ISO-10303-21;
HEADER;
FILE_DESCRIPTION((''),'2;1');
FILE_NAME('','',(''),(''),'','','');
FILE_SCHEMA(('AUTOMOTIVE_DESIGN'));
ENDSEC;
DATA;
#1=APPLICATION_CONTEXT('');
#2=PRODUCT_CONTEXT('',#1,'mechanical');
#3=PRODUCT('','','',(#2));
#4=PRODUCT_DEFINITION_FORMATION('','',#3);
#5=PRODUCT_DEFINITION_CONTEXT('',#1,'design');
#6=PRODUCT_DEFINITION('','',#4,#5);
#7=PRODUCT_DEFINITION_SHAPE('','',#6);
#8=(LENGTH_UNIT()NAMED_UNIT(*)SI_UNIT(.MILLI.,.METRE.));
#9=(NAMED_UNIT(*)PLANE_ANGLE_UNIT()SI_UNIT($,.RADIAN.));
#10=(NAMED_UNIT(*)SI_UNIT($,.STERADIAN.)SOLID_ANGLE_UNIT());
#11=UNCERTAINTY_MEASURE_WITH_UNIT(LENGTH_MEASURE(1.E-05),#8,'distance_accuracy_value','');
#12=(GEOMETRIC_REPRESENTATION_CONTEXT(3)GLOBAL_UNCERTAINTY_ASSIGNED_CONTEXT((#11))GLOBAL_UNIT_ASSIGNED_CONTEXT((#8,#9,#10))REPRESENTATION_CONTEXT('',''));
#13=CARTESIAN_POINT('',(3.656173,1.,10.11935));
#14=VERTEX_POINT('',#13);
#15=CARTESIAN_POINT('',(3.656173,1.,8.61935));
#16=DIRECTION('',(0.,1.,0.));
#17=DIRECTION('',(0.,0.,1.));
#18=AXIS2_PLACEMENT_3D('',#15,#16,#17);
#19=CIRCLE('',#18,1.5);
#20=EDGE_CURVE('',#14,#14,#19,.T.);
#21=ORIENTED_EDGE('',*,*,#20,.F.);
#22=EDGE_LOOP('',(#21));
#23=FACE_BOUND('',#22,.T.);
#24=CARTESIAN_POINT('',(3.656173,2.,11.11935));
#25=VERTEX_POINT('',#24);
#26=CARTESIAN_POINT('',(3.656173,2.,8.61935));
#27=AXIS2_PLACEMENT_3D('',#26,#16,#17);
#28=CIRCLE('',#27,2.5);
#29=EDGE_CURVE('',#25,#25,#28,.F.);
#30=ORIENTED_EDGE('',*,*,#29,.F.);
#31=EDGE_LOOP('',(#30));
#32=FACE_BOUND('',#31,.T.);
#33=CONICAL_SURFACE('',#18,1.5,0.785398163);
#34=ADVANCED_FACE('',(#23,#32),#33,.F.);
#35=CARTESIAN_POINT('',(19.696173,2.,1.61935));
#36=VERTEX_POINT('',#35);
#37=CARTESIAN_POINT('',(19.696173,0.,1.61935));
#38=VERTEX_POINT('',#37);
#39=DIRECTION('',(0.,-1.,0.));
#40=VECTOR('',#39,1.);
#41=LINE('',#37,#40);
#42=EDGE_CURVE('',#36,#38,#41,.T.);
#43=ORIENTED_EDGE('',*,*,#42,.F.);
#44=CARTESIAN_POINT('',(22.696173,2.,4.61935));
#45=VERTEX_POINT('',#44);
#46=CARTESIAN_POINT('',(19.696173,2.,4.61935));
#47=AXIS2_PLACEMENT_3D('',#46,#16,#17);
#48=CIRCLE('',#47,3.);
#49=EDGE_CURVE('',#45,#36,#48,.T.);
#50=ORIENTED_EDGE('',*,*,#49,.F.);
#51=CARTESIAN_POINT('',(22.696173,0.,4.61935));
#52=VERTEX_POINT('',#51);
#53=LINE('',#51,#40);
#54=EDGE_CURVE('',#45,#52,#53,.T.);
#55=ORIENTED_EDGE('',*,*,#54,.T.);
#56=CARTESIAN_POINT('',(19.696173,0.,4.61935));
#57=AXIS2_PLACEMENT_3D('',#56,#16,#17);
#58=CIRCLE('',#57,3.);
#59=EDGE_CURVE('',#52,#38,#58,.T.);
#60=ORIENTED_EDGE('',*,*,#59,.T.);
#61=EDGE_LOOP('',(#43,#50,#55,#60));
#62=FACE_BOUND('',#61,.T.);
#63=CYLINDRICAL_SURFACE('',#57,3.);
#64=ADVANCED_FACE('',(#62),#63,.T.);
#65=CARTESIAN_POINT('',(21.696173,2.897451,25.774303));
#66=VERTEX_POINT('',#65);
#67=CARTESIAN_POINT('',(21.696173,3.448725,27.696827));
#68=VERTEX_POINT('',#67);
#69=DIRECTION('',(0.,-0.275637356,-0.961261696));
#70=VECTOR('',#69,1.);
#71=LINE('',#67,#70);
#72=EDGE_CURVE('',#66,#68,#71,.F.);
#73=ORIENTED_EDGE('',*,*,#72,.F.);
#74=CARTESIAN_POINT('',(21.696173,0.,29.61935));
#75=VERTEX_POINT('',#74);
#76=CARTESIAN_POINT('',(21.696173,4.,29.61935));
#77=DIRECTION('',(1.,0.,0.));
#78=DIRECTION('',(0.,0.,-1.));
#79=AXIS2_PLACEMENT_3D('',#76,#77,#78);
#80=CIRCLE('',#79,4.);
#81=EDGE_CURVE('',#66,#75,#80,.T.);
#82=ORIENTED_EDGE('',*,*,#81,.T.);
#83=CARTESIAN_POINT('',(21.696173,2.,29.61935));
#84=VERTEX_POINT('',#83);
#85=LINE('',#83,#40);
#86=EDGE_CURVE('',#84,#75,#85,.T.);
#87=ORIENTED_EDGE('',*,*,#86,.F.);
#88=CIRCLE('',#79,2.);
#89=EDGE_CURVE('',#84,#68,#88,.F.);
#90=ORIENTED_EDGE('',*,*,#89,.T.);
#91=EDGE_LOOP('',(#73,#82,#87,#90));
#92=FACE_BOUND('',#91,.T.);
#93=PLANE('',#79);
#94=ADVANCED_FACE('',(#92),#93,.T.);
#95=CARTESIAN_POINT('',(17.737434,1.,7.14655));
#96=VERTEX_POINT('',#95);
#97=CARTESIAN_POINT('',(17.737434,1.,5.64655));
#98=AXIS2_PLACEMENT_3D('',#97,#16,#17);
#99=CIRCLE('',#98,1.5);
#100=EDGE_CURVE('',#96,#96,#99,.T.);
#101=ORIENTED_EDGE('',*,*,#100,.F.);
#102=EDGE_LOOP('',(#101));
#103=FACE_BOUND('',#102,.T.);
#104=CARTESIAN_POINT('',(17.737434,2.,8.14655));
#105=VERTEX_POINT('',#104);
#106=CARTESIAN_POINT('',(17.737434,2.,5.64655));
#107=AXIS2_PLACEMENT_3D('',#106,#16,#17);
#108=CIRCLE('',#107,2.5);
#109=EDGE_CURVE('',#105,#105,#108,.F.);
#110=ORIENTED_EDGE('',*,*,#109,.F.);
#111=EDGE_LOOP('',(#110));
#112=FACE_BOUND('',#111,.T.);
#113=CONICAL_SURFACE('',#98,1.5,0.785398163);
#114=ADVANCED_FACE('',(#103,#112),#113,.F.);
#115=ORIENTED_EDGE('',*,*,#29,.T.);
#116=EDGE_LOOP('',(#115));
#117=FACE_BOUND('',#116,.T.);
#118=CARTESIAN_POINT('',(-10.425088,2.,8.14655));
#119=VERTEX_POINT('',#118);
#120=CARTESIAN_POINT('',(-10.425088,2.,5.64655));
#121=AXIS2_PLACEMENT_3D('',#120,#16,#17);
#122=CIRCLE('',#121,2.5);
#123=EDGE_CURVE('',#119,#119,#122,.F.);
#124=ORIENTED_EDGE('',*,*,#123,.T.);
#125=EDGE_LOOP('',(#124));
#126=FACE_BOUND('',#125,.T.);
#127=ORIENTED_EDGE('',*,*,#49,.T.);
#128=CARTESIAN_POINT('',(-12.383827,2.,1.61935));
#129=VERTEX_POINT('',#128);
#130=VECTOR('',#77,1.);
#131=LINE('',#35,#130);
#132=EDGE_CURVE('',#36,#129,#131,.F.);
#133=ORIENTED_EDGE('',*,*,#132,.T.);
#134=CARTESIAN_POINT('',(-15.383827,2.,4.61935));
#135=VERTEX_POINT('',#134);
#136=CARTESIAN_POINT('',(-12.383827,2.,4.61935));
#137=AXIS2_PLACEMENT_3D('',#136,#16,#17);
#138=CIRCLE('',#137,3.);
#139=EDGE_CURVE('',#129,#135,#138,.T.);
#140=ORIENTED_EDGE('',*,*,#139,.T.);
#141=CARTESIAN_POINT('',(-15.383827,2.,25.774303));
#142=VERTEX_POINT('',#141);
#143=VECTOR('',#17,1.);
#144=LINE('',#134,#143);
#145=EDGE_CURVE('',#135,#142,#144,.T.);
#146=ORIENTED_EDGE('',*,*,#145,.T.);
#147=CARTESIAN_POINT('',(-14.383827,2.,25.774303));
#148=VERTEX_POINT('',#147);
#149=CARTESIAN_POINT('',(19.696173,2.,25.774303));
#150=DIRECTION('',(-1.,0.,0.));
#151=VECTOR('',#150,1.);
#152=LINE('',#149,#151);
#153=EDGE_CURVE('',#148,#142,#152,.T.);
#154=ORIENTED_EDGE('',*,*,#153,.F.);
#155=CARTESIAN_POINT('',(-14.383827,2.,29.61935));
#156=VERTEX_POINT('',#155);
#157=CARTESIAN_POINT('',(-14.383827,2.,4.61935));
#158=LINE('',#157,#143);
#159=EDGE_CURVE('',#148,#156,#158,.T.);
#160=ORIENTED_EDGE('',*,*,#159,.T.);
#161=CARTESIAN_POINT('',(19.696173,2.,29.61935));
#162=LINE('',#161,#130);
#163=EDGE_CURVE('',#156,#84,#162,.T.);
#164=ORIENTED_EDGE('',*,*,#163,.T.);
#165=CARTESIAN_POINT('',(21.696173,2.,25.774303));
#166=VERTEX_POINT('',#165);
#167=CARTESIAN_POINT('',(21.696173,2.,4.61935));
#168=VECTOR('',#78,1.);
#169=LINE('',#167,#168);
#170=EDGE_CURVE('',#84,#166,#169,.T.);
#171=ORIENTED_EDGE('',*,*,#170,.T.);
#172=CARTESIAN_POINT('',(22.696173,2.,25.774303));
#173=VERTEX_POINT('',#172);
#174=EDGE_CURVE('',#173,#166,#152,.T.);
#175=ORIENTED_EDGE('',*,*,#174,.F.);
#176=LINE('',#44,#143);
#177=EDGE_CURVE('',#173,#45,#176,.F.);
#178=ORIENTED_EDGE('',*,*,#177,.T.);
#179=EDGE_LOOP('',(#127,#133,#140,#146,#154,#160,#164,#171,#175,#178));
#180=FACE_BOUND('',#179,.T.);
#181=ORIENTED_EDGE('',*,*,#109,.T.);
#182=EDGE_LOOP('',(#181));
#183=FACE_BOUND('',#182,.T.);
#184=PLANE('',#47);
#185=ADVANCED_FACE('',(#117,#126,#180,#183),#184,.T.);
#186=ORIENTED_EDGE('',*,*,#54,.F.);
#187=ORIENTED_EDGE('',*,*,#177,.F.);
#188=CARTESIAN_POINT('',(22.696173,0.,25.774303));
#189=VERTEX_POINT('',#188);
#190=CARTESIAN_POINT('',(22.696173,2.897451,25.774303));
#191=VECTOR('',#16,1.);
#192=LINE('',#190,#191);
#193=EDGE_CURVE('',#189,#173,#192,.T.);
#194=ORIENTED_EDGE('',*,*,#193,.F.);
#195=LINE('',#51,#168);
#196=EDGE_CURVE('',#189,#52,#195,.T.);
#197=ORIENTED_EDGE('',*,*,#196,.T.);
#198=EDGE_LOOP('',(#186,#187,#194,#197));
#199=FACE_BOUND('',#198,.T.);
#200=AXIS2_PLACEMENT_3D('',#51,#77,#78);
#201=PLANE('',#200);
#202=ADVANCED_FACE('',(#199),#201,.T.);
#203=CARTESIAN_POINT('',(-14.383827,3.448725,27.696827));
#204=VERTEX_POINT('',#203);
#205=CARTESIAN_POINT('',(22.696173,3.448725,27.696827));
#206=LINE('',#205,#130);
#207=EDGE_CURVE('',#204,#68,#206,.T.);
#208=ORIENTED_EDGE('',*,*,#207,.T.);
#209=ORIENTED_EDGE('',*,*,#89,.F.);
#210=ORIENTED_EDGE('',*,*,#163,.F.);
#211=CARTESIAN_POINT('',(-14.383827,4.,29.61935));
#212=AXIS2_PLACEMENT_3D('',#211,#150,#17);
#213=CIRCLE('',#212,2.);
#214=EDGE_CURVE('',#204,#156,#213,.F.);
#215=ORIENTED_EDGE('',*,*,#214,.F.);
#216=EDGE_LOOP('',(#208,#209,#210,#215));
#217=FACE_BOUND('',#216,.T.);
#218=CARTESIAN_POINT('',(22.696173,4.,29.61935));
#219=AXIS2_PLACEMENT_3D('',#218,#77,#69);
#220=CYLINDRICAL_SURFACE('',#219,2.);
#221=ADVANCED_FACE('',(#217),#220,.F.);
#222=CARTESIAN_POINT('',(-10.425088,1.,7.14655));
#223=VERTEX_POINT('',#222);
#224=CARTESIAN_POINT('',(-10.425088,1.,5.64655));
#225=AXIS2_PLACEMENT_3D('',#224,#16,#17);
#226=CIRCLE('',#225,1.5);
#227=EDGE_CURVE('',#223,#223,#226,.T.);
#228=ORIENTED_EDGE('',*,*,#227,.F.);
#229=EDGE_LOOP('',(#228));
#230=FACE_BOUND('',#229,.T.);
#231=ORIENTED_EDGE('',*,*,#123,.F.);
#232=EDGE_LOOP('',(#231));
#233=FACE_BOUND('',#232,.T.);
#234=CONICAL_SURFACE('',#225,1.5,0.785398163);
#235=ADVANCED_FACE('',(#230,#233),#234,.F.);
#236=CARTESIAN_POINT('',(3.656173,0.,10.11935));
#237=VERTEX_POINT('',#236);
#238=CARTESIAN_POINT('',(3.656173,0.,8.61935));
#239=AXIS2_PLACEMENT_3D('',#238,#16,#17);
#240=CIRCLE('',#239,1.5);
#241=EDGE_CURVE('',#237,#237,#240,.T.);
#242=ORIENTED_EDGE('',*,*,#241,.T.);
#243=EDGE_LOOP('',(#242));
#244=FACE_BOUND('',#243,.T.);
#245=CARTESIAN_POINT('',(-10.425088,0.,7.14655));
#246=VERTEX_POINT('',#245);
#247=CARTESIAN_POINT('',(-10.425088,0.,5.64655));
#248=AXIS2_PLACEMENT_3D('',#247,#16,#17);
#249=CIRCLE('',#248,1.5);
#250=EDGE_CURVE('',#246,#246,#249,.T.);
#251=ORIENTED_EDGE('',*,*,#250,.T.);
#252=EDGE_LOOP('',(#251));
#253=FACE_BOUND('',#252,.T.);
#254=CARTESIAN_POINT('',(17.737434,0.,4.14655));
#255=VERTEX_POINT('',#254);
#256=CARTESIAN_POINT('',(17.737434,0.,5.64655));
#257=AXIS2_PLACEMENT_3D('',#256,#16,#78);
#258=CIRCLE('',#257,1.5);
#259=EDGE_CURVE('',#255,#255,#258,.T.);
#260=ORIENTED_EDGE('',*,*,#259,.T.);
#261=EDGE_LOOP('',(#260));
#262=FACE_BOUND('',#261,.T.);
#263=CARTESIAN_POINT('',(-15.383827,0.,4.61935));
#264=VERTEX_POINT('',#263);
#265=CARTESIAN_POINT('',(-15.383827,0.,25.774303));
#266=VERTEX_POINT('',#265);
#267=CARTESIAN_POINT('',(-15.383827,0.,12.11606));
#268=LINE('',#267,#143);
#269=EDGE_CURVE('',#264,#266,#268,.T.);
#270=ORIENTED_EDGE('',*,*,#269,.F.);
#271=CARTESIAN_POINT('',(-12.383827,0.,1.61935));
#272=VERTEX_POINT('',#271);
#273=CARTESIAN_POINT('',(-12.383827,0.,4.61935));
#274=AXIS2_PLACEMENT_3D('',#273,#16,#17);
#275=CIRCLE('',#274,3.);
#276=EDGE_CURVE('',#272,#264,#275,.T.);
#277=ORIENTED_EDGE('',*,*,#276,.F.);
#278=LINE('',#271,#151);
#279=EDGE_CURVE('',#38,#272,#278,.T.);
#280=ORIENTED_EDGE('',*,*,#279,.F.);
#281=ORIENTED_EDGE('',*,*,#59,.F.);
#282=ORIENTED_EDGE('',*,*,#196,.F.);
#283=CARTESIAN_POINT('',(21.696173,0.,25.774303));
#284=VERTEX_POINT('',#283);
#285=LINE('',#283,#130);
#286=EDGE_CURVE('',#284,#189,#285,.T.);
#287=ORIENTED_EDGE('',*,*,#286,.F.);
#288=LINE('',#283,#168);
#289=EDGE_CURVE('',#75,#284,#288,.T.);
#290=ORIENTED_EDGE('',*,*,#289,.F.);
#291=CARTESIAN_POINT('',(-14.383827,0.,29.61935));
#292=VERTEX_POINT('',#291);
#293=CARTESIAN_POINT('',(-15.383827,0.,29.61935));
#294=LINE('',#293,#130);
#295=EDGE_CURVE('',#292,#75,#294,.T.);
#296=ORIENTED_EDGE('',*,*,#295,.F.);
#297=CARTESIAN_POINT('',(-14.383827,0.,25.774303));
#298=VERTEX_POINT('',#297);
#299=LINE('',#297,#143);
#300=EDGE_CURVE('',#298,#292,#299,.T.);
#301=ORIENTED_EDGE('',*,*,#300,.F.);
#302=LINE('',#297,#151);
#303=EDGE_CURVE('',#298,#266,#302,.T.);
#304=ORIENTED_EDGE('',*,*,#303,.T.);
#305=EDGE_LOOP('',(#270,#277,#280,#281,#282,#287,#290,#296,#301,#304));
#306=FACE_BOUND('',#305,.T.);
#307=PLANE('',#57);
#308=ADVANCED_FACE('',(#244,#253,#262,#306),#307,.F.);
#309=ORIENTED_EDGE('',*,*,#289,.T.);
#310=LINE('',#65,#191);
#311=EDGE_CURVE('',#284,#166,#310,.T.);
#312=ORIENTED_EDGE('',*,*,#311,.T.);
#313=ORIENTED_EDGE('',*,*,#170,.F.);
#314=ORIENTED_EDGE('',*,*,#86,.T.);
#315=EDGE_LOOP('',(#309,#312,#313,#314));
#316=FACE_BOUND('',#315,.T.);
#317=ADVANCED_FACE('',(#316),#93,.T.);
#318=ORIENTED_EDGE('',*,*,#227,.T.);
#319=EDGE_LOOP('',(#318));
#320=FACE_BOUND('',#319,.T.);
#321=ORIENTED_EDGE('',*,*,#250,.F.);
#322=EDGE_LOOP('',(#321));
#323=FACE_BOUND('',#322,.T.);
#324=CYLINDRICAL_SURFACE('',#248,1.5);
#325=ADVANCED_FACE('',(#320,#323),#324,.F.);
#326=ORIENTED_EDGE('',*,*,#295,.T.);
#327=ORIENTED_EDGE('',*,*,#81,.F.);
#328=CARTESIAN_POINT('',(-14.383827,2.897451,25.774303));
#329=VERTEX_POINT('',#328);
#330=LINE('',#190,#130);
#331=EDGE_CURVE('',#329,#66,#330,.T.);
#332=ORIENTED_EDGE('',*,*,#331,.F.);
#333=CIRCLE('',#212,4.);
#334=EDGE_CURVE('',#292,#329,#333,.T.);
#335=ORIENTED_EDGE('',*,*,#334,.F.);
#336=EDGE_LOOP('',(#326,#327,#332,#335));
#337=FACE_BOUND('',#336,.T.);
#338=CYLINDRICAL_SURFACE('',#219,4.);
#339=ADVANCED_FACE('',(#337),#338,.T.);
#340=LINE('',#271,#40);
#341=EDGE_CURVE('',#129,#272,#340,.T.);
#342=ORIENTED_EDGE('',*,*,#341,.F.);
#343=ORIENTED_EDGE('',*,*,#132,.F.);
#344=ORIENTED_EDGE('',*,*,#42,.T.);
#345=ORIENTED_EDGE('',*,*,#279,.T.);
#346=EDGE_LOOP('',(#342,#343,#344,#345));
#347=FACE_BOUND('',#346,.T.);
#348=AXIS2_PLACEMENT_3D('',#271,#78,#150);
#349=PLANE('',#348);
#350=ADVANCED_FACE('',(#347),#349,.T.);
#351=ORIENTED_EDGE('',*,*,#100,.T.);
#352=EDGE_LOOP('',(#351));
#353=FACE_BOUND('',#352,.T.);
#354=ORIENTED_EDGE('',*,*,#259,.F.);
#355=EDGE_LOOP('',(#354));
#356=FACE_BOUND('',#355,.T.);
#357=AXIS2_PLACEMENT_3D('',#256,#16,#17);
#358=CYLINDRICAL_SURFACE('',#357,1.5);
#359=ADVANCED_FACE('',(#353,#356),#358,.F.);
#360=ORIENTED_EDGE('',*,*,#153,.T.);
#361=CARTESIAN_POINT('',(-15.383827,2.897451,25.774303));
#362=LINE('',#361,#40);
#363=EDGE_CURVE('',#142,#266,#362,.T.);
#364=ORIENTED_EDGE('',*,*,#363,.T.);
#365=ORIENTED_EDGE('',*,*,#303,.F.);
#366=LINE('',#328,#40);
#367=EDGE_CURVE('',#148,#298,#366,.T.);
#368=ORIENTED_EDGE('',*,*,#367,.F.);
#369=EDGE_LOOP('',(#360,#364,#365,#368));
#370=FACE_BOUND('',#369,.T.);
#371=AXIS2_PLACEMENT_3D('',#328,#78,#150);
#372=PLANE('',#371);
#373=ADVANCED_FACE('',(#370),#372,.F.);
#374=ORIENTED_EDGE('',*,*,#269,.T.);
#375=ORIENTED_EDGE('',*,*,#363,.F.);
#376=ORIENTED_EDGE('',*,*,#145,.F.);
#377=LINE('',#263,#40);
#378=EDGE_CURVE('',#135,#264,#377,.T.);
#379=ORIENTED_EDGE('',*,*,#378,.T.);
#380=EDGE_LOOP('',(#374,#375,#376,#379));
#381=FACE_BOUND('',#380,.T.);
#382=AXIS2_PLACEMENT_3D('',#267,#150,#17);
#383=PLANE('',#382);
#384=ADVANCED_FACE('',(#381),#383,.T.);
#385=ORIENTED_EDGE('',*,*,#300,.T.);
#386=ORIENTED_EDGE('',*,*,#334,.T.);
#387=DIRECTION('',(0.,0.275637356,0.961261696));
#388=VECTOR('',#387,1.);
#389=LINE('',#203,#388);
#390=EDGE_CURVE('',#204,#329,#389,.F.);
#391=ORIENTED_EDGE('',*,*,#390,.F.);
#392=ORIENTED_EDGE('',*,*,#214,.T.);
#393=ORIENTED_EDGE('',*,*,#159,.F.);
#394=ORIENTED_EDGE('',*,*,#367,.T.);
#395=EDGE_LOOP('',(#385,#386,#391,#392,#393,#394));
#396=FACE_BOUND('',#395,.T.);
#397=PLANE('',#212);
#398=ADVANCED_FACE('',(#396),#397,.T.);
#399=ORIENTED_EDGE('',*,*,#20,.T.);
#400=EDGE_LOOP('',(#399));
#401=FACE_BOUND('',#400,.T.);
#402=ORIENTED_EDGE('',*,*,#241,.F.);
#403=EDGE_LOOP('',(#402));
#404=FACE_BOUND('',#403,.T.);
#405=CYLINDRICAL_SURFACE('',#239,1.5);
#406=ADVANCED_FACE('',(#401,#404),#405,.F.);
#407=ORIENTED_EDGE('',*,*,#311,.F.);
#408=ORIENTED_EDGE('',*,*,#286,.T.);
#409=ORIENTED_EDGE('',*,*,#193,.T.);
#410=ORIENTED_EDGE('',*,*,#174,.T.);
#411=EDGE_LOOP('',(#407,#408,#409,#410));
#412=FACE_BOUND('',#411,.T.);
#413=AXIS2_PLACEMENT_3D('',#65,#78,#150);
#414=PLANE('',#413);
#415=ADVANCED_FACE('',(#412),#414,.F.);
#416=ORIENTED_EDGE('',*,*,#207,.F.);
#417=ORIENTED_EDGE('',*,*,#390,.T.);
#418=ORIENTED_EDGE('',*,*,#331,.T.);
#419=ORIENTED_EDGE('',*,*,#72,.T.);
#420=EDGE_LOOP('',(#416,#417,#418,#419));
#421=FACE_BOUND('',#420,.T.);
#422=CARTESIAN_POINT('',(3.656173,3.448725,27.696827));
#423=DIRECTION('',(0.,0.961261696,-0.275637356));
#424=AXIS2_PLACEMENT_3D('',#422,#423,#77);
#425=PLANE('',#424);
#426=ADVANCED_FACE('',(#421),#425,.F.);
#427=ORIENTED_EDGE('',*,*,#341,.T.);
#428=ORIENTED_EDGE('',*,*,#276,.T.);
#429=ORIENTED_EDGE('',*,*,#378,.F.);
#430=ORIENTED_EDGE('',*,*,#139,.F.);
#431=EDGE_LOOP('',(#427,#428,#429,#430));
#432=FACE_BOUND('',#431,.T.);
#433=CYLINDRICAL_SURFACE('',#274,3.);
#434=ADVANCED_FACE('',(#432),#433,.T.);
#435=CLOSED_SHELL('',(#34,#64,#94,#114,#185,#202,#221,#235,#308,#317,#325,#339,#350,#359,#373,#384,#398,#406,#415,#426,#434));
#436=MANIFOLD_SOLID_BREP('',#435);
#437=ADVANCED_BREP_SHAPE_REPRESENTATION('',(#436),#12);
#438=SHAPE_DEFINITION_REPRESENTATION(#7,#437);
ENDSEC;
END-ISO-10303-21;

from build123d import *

# Parameters (mm, degrees)
IZIM1_R                     = 1.5
Y_KSEKLIK_EKSTR_ZYON1_DEPTH = 2
Y_KSEKLIK_EKSTR_ZYON2_DEPTH = 38.08
KAT_Y_D_N_T_R1_START        = 2
KAT_Y_D_N_T_R1_OUTLINE_W    = 38.08
KAT_Y_D_N_T_R1_OUTLINE_H    = 11
KAT_Y_D_N_T_R1_DEPTH        = 6
KENAR_START                 = -15.383826754
KENAR_EKME1_DEPTH           = 38.08
PAH2_SIZE                   = 1
KES_EKSTR_ZYON1_START       = -1
KES_EKSTR_ZYON1_DEPTH       = 1
KES_EKSTR_ZYON2_DEPTH       = 1


# Read off the part's stored shape, not the designer's step: Katıyı-Dönüştür1, Kenar Çekme1
with BuildPart() as part:
    # Çizim1 → Yükseklik-Ekstrüzyon1 (new body)
    with BuildSketch(Plane(origin=(0, 0, 0), x_dir=(1, 0, 0), z_dir=(0, 1, 0))):
        with BuildLine():
            Line((-12.383826754, -1.619350185), (-2.804796795, -1.619350185))
            Line((-2.804796795, -1.619350185), (19.696173246, -1.619350185))
            ThreePointArc((19.696173246, -1.619350185), (21.81749359, -2.498029841), (22.696173246, -4.619350185))
            Line((22.696173246, -4.619350185), (22.696173246, -24.732233603))
            Line((22.696173246, -24.732233603), (22.696173246, -29.619350185))
            Line((22.696173246, -29.619350185), (-15.383826754, -29.619350185))
            Line((-15.383826754, -29.619350185), (-15.383826754, -12.116060357))
            Line((-15.383826754, -12.116060357), (-15.383826754, -4.619350185))
            ThreePointArc((-15.383826754, -4.619350185), (-14.505147098, -2.498029841), (-12.383826754, -1.619350185))
        make_face()
        with Locations(Location((3.656173246, -8.619350185, 0), (0, 0, 270))):
            Circle(IZIM1_R, mode=Mode.SUBTRACT)
        with Locations(Location((-10.425087976, -5.646549714, 0), (0, 0, 270))):
            Circle(IZIM1_R, mode=Mode.SUBTRACT)
        with Locations(Location((17.737434468, -5.646549714, 0), (0, 0, 90))):
            Circle(IZIM1_R, mode=Mode.SUBTRACT)
    extrude(amount=Y_KSEKLIK_EKSTR_ZYON1_DEPTH)

    # Çizim2 → Yükseklik-Ekstrüzyon2 (add)
    with BuildSketch(Plane(origin=(22.696173246, 0, 0), x_dir=(0, 0, -1), z_dir=(1, 0, 0))):
        with BuildLine():
            Line((-19.271126131, 3), (-17.130193592, 3))
            ThreePointArc((-17.130193592, 3), (-23.452666681, 7.16227766), (-21.003176939, 0))
            Line((-21.003176939, 0), (-17.003176939, 0))
            Line((-17.003176939, 0), (-17.003176939, 2))
            Line((-17.003176939, 2), (-21.003176939, 2))
            ThreePointArc((-21.003176939, 2), (-22.003176939, 5.732050808), (-19.271126131, 3))
        make_face()
    extrude(amount=-Y_KSEKLIK_EKSTR_ZYON2_DEPTH)

    # Katıyı-Dönüştür1 outline → Katıyı-Dönüştür1 (cut)
    with BuildSketch(Plane(origin=(0, 0, 0), x_dir=(1, 0, 0), z_dir=(0, 1, 0)).offset(KAT_Y_D_N_T_R1_START)):
        with Locations((3.656173246, -21.5)):
            Rectangle(KAT_Y_D_N_T_R1_OUTLINE_W, KAT_Y_D_N_T_R1_OUTLINE_H)
    extrude(amount=KAT_Y_D_N_T_R1_DEPTH, mode=Mode.SUBTRACT)

    # Kenar Çekme1 outline → Kenar Çekme1 (add)
    with BuildSketch(Plane.YZ.offset(KENAR_START)):
        with BuildLine():
            Line((3.448725288, 27.696826793), (2.897450577, 25.774303401))
            ThreePointArc((2.897450577, 25.774303401), (7.19454204, 32.026610277), (0, 29.619350185))
            Line((0, 29.619350185), (2, 29.619350185))
            ThreePointArc((2, 29.619350185), (5.59727102, 30.822980231), (3.448725288, 27.696826793))
        make_face()
    extrude(amount=KENAR_EKME1_DEPTH)

    # Pah2
    pah2_edges = [part.edges().sort_by_distance(p)[0] for p in [
        (-10.425087976, 2, 4.146549714),
        (3.656173246, 2, 7.119350185),
        (17.737434468, 2, 7.146549714),
    ]]
    chamfer(pah2_edges, length=PAH2_SIZE)

    # Çizim11 → Kes-Ekstrüzyon1 (cut)
    with BuildSketch(Plane(origin=(22.696173246, 0, 0), x_dir=(0, 0, -1), z_dir=(1, 0, 0)).offset(KES_EKSTR_ZYON1_START)):
        with BuildLine():
            Line((-25.774303401, 2.897450577), (-25.774303401, 0))
            Line((-25.774303401, 0), (-29.619350185, 0))
            ThreePointArc((-29.619350185, 0), (-32.026610277, 7.19454204), (-25.774303401, 2.897450577))
        make_face()
    extrude(amount=KES_EKSTR_ZYON1_DEPTH, mode=Mode.SUBTRACT)

    # Çizim12 → Kes-Ekstrüzyon2 (cut)
    with BuildSketch(Plane.ZY.offset(15.383826754)):
        with BuildLine():
            Line((25.774303401, 2.897450577), (25.774303401, 0))
            Line((25.774303401, 0), (29.619350185, 0))
            ThreePointArc((29.619350185, 0), (32.026610277, 7.19454204), (25.774303401, 2.897450577))
        make_face()
    extrude(amount=-KES_EKSTR_ZYON2_DEPTH, mode=Mode.SUBTRACT)


solid = part.part
